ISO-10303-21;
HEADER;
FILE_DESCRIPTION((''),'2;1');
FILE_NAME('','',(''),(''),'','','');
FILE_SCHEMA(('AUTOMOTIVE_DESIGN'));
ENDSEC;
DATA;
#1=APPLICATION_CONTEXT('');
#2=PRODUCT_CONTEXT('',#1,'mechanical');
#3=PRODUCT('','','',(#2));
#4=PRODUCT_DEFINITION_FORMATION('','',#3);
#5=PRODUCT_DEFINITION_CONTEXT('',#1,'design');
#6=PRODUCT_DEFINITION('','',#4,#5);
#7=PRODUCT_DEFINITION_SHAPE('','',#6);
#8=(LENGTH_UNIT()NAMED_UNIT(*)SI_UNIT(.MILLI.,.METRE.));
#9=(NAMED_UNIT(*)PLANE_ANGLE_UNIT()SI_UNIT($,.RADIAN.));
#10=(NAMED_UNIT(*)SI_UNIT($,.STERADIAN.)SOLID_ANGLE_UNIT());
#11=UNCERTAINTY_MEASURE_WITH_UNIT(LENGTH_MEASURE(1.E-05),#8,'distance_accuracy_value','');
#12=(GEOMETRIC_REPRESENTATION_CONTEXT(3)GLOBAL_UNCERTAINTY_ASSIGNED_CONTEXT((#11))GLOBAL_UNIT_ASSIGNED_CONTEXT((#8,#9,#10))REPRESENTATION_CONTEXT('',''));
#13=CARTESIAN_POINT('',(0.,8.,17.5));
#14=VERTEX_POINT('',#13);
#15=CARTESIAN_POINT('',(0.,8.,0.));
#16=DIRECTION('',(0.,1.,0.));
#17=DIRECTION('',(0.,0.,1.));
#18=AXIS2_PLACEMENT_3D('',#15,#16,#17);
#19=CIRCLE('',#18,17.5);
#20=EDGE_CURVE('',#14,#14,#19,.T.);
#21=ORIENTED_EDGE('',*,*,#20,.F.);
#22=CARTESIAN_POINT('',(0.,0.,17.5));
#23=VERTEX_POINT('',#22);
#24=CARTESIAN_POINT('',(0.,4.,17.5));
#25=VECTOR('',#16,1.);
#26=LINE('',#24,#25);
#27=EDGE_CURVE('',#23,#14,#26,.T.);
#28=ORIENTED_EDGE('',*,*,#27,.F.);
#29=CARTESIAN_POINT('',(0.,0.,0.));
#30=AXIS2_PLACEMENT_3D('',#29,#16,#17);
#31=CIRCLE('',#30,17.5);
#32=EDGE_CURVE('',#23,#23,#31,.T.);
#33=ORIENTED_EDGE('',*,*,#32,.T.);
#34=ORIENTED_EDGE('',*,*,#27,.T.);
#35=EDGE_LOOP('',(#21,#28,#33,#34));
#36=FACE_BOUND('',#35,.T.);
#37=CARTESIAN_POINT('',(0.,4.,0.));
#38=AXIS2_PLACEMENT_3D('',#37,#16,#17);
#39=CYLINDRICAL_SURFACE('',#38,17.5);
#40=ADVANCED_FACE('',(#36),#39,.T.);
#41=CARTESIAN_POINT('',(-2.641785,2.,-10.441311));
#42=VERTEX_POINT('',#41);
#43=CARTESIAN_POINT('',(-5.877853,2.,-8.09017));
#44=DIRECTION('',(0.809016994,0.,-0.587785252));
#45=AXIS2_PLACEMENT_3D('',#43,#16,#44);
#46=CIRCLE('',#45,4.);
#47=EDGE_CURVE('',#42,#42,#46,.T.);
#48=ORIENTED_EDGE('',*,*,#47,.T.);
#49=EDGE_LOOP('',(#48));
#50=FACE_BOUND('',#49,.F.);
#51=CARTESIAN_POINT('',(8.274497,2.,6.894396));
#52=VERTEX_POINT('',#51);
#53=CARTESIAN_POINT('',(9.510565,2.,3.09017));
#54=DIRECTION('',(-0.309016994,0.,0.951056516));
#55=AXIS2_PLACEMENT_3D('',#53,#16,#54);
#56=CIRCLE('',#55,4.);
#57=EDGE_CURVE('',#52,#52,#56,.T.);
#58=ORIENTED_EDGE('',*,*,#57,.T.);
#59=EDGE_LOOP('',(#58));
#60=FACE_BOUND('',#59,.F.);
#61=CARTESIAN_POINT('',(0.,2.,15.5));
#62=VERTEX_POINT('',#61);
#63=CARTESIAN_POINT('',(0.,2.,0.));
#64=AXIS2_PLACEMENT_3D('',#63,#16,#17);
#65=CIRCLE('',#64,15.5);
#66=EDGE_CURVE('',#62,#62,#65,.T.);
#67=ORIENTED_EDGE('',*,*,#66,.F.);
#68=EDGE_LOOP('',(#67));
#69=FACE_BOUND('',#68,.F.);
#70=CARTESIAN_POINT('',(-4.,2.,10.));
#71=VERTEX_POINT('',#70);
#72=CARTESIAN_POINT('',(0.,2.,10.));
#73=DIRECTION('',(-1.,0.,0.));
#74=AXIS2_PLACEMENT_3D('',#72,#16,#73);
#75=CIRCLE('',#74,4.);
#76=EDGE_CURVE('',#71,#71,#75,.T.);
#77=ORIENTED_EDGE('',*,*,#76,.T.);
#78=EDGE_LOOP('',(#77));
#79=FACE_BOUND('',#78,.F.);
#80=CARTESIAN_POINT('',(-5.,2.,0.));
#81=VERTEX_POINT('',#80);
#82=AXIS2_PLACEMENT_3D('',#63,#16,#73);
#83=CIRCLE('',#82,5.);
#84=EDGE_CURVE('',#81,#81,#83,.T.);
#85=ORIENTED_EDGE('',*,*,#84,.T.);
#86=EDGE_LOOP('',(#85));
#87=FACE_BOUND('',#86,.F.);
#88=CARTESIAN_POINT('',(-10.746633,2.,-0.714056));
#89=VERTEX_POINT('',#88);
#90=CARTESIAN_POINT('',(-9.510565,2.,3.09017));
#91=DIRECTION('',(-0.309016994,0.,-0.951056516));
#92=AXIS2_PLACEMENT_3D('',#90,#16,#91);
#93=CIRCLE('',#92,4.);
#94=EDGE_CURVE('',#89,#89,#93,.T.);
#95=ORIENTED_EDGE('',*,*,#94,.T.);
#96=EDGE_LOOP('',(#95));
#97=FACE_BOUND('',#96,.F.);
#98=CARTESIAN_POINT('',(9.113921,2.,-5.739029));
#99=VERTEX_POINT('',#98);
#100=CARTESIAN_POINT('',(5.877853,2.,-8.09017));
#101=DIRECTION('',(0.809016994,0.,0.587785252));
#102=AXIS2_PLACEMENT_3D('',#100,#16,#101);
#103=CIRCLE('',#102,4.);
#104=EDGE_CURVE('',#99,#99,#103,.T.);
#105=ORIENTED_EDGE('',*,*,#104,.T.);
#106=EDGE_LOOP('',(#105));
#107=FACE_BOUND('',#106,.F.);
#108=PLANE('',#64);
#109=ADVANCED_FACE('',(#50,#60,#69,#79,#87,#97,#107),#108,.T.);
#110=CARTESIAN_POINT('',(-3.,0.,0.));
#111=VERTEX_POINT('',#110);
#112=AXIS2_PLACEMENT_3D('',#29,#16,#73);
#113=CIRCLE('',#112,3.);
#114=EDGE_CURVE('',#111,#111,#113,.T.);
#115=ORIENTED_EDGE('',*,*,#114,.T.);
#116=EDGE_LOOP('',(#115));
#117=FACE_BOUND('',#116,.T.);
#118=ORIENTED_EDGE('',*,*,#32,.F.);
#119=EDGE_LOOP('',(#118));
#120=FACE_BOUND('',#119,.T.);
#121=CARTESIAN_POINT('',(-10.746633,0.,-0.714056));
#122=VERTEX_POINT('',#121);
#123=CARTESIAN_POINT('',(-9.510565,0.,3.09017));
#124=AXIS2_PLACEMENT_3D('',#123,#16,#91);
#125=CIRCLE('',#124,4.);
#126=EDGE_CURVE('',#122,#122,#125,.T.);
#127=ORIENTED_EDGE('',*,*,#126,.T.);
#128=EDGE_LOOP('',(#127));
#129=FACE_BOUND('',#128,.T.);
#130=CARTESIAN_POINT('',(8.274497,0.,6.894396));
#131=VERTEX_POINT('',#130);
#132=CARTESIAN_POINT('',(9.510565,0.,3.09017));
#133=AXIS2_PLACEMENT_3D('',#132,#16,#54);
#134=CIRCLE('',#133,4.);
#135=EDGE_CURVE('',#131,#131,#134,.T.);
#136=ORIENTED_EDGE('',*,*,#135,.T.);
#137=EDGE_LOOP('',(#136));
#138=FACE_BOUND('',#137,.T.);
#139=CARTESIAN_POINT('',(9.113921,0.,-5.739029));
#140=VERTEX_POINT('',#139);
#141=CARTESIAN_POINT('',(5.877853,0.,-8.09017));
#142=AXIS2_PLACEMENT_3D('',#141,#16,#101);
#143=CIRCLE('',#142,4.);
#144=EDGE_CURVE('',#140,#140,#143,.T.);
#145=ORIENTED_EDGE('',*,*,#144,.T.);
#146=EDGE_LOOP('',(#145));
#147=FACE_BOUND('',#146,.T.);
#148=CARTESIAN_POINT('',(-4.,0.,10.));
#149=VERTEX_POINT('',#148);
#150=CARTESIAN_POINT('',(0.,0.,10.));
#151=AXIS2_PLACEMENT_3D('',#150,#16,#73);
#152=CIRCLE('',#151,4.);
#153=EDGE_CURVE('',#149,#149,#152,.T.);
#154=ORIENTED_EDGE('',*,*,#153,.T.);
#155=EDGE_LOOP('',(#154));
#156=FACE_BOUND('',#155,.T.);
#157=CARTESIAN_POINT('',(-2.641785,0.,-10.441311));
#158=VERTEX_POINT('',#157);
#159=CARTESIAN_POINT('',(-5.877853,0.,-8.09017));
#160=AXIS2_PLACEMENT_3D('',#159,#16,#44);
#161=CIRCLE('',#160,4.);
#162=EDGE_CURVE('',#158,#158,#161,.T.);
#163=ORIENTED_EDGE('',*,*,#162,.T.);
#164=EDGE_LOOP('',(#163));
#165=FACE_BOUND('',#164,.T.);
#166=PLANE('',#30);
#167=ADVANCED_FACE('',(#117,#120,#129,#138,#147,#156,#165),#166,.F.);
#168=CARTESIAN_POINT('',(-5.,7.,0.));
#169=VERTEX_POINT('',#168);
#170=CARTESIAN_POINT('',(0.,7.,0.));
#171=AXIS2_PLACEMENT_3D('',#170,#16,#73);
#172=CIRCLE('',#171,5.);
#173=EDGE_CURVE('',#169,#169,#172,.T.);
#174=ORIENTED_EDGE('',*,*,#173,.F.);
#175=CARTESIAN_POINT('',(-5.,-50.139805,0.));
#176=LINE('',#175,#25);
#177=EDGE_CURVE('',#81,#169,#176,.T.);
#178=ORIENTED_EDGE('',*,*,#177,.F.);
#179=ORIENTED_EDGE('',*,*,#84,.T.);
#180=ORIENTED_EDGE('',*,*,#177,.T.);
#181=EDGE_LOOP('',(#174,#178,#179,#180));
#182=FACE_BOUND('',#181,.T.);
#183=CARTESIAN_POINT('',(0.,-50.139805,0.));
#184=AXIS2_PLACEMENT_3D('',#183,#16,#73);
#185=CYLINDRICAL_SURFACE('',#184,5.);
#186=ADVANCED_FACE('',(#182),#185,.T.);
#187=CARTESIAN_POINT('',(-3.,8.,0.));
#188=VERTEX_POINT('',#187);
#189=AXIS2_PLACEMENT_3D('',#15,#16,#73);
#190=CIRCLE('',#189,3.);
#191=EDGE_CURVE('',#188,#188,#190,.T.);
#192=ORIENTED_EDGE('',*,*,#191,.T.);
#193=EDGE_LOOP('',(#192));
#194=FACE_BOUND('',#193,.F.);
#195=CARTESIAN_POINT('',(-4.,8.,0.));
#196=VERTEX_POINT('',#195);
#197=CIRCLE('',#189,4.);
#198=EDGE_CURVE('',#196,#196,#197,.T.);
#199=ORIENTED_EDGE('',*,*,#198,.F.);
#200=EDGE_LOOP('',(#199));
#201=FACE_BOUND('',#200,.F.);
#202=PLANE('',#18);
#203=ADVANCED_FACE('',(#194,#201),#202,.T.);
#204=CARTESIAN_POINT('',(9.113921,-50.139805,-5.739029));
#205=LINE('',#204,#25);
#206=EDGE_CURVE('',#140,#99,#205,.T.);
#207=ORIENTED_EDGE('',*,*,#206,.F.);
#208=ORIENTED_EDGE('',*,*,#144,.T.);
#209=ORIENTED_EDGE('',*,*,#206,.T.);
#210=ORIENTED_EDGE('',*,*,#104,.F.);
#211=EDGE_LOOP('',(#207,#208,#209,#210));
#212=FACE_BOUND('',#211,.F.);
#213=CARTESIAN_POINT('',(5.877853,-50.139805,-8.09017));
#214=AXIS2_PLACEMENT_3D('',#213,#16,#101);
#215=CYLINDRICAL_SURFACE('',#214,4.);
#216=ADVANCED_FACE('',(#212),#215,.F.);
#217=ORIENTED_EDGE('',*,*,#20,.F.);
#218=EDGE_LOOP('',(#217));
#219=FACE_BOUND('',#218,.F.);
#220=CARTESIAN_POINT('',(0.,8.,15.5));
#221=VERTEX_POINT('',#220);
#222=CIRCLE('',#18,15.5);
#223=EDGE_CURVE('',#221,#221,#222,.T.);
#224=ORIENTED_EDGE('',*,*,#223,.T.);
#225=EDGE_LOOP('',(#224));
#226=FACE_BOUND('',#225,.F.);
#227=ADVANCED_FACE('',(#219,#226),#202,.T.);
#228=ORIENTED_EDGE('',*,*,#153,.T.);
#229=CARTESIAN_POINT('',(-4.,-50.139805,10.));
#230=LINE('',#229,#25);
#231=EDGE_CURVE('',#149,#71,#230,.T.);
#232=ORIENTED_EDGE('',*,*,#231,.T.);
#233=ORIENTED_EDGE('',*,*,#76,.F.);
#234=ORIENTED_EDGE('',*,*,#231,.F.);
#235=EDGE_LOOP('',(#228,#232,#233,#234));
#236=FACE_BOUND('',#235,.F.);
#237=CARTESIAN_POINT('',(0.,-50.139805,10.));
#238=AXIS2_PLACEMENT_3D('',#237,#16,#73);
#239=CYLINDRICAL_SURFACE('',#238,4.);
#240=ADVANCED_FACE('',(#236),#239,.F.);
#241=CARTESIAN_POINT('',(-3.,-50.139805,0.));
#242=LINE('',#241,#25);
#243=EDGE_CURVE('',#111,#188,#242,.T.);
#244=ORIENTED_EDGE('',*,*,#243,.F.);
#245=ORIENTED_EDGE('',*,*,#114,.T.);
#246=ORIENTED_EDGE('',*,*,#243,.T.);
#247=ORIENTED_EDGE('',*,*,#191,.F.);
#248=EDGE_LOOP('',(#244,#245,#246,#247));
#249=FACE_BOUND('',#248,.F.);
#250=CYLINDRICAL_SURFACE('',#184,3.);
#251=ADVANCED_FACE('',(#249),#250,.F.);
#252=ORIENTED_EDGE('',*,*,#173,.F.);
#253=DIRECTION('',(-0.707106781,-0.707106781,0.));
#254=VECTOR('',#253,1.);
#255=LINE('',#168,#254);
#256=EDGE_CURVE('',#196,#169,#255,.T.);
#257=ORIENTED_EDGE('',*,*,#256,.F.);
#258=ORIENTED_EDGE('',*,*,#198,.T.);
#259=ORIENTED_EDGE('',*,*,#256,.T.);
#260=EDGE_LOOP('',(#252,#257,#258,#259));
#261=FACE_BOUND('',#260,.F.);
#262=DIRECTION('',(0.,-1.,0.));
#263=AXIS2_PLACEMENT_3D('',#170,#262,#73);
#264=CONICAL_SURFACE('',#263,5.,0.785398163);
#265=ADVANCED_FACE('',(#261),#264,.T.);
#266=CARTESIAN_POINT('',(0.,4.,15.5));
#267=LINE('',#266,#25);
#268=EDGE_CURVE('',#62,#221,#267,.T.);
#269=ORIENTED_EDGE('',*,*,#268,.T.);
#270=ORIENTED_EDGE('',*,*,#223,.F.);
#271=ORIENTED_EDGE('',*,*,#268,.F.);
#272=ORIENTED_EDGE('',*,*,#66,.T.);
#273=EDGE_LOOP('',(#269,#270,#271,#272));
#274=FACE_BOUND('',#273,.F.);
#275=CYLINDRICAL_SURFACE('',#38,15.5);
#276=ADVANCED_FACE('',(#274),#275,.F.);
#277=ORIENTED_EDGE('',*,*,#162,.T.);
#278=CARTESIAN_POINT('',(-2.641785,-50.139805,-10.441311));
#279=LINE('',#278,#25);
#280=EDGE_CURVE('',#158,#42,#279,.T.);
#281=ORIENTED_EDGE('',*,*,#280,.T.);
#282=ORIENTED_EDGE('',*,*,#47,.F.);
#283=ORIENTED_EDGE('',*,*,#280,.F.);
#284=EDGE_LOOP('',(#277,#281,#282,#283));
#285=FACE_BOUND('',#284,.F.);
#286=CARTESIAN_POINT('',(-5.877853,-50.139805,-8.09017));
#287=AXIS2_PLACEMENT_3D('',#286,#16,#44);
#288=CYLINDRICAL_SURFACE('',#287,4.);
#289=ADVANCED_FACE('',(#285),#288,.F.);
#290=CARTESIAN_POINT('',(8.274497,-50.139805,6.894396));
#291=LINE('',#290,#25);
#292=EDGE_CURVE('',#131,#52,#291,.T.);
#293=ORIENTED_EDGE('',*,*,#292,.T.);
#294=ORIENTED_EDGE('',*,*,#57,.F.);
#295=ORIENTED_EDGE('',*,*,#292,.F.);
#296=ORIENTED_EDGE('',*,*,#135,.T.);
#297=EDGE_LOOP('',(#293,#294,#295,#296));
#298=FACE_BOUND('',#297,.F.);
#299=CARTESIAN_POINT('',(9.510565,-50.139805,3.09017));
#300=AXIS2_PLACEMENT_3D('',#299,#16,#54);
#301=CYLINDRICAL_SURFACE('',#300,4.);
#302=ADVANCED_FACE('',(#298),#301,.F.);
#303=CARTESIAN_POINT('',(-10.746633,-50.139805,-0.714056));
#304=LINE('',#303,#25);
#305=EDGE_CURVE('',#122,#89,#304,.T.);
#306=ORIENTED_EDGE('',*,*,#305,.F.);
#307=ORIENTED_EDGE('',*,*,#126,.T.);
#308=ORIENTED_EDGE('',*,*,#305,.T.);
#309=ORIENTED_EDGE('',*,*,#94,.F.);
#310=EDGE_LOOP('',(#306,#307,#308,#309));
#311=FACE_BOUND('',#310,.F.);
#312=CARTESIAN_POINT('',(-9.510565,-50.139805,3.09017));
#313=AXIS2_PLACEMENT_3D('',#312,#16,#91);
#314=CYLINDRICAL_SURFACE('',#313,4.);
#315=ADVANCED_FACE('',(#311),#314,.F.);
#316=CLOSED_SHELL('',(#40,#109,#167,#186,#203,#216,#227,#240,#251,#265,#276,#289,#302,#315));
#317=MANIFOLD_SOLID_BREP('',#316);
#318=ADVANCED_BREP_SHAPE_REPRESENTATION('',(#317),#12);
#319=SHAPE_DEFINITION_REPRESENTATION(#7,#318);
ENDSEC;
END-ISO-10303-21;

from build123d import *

# Parameters (mm, degrees)
F0_W            = 8
F0_H            = 17.5
F3_D            = 6
F4_T            = -2
F6_D            = 8
F6_COPIES_COUNT = 5
F7_SIZE         = 1


# Not quite as in the source:
# - a pattern or mirror of a feature is missing from the dataset's text; its kind, count and spacing are read off the source's solid


with BuildPart() as f1:
    # F0 (on Right) → F1 (revolve)
    with BuildSketch(Plane.YZ):
        with Locations((4, 8.75)):
            Rectangle(F0_W, F0_H)
    revolve(axis=Axis((0, 4, 0), (0, 1, 0)))

    # F3 (through all)
    with Locations(Plane.XZ):
        with Locations((0, 0)):
            Hole(F3_D / 2)

    # F4
    f4_openings = [f1.faces().sort_by_distance(p)[0] for p in [
        (0, 8, -17.005025),
    ]]
    offset(amount=F4_T, openings=f4_openings)

    # F6 (through all)
    with Locations(Plane.XZ):
        with Locations((0, 10)):
            f6 = Hole(F6_D / 2)

    # F6_copies: F6 ×5 about axis
    f6_copies_axis = Axis((0, 0, 0), (0, 1, 0))
    for i in range(1, F6_COPIES_COUNT):
        add(f6.rotate(f6_copies_axis, i * 360 / F6_COPIES_COUNT), mode=Mode.SUBTRACT)

    # F7
    f7_edges = [f1.edges().sort_by_distance(p)[0] for p in [
        (-5, 8, 0),
    ]]
    chamfer(f7_edges, length=F7_SIZE)


solid = f1.part
